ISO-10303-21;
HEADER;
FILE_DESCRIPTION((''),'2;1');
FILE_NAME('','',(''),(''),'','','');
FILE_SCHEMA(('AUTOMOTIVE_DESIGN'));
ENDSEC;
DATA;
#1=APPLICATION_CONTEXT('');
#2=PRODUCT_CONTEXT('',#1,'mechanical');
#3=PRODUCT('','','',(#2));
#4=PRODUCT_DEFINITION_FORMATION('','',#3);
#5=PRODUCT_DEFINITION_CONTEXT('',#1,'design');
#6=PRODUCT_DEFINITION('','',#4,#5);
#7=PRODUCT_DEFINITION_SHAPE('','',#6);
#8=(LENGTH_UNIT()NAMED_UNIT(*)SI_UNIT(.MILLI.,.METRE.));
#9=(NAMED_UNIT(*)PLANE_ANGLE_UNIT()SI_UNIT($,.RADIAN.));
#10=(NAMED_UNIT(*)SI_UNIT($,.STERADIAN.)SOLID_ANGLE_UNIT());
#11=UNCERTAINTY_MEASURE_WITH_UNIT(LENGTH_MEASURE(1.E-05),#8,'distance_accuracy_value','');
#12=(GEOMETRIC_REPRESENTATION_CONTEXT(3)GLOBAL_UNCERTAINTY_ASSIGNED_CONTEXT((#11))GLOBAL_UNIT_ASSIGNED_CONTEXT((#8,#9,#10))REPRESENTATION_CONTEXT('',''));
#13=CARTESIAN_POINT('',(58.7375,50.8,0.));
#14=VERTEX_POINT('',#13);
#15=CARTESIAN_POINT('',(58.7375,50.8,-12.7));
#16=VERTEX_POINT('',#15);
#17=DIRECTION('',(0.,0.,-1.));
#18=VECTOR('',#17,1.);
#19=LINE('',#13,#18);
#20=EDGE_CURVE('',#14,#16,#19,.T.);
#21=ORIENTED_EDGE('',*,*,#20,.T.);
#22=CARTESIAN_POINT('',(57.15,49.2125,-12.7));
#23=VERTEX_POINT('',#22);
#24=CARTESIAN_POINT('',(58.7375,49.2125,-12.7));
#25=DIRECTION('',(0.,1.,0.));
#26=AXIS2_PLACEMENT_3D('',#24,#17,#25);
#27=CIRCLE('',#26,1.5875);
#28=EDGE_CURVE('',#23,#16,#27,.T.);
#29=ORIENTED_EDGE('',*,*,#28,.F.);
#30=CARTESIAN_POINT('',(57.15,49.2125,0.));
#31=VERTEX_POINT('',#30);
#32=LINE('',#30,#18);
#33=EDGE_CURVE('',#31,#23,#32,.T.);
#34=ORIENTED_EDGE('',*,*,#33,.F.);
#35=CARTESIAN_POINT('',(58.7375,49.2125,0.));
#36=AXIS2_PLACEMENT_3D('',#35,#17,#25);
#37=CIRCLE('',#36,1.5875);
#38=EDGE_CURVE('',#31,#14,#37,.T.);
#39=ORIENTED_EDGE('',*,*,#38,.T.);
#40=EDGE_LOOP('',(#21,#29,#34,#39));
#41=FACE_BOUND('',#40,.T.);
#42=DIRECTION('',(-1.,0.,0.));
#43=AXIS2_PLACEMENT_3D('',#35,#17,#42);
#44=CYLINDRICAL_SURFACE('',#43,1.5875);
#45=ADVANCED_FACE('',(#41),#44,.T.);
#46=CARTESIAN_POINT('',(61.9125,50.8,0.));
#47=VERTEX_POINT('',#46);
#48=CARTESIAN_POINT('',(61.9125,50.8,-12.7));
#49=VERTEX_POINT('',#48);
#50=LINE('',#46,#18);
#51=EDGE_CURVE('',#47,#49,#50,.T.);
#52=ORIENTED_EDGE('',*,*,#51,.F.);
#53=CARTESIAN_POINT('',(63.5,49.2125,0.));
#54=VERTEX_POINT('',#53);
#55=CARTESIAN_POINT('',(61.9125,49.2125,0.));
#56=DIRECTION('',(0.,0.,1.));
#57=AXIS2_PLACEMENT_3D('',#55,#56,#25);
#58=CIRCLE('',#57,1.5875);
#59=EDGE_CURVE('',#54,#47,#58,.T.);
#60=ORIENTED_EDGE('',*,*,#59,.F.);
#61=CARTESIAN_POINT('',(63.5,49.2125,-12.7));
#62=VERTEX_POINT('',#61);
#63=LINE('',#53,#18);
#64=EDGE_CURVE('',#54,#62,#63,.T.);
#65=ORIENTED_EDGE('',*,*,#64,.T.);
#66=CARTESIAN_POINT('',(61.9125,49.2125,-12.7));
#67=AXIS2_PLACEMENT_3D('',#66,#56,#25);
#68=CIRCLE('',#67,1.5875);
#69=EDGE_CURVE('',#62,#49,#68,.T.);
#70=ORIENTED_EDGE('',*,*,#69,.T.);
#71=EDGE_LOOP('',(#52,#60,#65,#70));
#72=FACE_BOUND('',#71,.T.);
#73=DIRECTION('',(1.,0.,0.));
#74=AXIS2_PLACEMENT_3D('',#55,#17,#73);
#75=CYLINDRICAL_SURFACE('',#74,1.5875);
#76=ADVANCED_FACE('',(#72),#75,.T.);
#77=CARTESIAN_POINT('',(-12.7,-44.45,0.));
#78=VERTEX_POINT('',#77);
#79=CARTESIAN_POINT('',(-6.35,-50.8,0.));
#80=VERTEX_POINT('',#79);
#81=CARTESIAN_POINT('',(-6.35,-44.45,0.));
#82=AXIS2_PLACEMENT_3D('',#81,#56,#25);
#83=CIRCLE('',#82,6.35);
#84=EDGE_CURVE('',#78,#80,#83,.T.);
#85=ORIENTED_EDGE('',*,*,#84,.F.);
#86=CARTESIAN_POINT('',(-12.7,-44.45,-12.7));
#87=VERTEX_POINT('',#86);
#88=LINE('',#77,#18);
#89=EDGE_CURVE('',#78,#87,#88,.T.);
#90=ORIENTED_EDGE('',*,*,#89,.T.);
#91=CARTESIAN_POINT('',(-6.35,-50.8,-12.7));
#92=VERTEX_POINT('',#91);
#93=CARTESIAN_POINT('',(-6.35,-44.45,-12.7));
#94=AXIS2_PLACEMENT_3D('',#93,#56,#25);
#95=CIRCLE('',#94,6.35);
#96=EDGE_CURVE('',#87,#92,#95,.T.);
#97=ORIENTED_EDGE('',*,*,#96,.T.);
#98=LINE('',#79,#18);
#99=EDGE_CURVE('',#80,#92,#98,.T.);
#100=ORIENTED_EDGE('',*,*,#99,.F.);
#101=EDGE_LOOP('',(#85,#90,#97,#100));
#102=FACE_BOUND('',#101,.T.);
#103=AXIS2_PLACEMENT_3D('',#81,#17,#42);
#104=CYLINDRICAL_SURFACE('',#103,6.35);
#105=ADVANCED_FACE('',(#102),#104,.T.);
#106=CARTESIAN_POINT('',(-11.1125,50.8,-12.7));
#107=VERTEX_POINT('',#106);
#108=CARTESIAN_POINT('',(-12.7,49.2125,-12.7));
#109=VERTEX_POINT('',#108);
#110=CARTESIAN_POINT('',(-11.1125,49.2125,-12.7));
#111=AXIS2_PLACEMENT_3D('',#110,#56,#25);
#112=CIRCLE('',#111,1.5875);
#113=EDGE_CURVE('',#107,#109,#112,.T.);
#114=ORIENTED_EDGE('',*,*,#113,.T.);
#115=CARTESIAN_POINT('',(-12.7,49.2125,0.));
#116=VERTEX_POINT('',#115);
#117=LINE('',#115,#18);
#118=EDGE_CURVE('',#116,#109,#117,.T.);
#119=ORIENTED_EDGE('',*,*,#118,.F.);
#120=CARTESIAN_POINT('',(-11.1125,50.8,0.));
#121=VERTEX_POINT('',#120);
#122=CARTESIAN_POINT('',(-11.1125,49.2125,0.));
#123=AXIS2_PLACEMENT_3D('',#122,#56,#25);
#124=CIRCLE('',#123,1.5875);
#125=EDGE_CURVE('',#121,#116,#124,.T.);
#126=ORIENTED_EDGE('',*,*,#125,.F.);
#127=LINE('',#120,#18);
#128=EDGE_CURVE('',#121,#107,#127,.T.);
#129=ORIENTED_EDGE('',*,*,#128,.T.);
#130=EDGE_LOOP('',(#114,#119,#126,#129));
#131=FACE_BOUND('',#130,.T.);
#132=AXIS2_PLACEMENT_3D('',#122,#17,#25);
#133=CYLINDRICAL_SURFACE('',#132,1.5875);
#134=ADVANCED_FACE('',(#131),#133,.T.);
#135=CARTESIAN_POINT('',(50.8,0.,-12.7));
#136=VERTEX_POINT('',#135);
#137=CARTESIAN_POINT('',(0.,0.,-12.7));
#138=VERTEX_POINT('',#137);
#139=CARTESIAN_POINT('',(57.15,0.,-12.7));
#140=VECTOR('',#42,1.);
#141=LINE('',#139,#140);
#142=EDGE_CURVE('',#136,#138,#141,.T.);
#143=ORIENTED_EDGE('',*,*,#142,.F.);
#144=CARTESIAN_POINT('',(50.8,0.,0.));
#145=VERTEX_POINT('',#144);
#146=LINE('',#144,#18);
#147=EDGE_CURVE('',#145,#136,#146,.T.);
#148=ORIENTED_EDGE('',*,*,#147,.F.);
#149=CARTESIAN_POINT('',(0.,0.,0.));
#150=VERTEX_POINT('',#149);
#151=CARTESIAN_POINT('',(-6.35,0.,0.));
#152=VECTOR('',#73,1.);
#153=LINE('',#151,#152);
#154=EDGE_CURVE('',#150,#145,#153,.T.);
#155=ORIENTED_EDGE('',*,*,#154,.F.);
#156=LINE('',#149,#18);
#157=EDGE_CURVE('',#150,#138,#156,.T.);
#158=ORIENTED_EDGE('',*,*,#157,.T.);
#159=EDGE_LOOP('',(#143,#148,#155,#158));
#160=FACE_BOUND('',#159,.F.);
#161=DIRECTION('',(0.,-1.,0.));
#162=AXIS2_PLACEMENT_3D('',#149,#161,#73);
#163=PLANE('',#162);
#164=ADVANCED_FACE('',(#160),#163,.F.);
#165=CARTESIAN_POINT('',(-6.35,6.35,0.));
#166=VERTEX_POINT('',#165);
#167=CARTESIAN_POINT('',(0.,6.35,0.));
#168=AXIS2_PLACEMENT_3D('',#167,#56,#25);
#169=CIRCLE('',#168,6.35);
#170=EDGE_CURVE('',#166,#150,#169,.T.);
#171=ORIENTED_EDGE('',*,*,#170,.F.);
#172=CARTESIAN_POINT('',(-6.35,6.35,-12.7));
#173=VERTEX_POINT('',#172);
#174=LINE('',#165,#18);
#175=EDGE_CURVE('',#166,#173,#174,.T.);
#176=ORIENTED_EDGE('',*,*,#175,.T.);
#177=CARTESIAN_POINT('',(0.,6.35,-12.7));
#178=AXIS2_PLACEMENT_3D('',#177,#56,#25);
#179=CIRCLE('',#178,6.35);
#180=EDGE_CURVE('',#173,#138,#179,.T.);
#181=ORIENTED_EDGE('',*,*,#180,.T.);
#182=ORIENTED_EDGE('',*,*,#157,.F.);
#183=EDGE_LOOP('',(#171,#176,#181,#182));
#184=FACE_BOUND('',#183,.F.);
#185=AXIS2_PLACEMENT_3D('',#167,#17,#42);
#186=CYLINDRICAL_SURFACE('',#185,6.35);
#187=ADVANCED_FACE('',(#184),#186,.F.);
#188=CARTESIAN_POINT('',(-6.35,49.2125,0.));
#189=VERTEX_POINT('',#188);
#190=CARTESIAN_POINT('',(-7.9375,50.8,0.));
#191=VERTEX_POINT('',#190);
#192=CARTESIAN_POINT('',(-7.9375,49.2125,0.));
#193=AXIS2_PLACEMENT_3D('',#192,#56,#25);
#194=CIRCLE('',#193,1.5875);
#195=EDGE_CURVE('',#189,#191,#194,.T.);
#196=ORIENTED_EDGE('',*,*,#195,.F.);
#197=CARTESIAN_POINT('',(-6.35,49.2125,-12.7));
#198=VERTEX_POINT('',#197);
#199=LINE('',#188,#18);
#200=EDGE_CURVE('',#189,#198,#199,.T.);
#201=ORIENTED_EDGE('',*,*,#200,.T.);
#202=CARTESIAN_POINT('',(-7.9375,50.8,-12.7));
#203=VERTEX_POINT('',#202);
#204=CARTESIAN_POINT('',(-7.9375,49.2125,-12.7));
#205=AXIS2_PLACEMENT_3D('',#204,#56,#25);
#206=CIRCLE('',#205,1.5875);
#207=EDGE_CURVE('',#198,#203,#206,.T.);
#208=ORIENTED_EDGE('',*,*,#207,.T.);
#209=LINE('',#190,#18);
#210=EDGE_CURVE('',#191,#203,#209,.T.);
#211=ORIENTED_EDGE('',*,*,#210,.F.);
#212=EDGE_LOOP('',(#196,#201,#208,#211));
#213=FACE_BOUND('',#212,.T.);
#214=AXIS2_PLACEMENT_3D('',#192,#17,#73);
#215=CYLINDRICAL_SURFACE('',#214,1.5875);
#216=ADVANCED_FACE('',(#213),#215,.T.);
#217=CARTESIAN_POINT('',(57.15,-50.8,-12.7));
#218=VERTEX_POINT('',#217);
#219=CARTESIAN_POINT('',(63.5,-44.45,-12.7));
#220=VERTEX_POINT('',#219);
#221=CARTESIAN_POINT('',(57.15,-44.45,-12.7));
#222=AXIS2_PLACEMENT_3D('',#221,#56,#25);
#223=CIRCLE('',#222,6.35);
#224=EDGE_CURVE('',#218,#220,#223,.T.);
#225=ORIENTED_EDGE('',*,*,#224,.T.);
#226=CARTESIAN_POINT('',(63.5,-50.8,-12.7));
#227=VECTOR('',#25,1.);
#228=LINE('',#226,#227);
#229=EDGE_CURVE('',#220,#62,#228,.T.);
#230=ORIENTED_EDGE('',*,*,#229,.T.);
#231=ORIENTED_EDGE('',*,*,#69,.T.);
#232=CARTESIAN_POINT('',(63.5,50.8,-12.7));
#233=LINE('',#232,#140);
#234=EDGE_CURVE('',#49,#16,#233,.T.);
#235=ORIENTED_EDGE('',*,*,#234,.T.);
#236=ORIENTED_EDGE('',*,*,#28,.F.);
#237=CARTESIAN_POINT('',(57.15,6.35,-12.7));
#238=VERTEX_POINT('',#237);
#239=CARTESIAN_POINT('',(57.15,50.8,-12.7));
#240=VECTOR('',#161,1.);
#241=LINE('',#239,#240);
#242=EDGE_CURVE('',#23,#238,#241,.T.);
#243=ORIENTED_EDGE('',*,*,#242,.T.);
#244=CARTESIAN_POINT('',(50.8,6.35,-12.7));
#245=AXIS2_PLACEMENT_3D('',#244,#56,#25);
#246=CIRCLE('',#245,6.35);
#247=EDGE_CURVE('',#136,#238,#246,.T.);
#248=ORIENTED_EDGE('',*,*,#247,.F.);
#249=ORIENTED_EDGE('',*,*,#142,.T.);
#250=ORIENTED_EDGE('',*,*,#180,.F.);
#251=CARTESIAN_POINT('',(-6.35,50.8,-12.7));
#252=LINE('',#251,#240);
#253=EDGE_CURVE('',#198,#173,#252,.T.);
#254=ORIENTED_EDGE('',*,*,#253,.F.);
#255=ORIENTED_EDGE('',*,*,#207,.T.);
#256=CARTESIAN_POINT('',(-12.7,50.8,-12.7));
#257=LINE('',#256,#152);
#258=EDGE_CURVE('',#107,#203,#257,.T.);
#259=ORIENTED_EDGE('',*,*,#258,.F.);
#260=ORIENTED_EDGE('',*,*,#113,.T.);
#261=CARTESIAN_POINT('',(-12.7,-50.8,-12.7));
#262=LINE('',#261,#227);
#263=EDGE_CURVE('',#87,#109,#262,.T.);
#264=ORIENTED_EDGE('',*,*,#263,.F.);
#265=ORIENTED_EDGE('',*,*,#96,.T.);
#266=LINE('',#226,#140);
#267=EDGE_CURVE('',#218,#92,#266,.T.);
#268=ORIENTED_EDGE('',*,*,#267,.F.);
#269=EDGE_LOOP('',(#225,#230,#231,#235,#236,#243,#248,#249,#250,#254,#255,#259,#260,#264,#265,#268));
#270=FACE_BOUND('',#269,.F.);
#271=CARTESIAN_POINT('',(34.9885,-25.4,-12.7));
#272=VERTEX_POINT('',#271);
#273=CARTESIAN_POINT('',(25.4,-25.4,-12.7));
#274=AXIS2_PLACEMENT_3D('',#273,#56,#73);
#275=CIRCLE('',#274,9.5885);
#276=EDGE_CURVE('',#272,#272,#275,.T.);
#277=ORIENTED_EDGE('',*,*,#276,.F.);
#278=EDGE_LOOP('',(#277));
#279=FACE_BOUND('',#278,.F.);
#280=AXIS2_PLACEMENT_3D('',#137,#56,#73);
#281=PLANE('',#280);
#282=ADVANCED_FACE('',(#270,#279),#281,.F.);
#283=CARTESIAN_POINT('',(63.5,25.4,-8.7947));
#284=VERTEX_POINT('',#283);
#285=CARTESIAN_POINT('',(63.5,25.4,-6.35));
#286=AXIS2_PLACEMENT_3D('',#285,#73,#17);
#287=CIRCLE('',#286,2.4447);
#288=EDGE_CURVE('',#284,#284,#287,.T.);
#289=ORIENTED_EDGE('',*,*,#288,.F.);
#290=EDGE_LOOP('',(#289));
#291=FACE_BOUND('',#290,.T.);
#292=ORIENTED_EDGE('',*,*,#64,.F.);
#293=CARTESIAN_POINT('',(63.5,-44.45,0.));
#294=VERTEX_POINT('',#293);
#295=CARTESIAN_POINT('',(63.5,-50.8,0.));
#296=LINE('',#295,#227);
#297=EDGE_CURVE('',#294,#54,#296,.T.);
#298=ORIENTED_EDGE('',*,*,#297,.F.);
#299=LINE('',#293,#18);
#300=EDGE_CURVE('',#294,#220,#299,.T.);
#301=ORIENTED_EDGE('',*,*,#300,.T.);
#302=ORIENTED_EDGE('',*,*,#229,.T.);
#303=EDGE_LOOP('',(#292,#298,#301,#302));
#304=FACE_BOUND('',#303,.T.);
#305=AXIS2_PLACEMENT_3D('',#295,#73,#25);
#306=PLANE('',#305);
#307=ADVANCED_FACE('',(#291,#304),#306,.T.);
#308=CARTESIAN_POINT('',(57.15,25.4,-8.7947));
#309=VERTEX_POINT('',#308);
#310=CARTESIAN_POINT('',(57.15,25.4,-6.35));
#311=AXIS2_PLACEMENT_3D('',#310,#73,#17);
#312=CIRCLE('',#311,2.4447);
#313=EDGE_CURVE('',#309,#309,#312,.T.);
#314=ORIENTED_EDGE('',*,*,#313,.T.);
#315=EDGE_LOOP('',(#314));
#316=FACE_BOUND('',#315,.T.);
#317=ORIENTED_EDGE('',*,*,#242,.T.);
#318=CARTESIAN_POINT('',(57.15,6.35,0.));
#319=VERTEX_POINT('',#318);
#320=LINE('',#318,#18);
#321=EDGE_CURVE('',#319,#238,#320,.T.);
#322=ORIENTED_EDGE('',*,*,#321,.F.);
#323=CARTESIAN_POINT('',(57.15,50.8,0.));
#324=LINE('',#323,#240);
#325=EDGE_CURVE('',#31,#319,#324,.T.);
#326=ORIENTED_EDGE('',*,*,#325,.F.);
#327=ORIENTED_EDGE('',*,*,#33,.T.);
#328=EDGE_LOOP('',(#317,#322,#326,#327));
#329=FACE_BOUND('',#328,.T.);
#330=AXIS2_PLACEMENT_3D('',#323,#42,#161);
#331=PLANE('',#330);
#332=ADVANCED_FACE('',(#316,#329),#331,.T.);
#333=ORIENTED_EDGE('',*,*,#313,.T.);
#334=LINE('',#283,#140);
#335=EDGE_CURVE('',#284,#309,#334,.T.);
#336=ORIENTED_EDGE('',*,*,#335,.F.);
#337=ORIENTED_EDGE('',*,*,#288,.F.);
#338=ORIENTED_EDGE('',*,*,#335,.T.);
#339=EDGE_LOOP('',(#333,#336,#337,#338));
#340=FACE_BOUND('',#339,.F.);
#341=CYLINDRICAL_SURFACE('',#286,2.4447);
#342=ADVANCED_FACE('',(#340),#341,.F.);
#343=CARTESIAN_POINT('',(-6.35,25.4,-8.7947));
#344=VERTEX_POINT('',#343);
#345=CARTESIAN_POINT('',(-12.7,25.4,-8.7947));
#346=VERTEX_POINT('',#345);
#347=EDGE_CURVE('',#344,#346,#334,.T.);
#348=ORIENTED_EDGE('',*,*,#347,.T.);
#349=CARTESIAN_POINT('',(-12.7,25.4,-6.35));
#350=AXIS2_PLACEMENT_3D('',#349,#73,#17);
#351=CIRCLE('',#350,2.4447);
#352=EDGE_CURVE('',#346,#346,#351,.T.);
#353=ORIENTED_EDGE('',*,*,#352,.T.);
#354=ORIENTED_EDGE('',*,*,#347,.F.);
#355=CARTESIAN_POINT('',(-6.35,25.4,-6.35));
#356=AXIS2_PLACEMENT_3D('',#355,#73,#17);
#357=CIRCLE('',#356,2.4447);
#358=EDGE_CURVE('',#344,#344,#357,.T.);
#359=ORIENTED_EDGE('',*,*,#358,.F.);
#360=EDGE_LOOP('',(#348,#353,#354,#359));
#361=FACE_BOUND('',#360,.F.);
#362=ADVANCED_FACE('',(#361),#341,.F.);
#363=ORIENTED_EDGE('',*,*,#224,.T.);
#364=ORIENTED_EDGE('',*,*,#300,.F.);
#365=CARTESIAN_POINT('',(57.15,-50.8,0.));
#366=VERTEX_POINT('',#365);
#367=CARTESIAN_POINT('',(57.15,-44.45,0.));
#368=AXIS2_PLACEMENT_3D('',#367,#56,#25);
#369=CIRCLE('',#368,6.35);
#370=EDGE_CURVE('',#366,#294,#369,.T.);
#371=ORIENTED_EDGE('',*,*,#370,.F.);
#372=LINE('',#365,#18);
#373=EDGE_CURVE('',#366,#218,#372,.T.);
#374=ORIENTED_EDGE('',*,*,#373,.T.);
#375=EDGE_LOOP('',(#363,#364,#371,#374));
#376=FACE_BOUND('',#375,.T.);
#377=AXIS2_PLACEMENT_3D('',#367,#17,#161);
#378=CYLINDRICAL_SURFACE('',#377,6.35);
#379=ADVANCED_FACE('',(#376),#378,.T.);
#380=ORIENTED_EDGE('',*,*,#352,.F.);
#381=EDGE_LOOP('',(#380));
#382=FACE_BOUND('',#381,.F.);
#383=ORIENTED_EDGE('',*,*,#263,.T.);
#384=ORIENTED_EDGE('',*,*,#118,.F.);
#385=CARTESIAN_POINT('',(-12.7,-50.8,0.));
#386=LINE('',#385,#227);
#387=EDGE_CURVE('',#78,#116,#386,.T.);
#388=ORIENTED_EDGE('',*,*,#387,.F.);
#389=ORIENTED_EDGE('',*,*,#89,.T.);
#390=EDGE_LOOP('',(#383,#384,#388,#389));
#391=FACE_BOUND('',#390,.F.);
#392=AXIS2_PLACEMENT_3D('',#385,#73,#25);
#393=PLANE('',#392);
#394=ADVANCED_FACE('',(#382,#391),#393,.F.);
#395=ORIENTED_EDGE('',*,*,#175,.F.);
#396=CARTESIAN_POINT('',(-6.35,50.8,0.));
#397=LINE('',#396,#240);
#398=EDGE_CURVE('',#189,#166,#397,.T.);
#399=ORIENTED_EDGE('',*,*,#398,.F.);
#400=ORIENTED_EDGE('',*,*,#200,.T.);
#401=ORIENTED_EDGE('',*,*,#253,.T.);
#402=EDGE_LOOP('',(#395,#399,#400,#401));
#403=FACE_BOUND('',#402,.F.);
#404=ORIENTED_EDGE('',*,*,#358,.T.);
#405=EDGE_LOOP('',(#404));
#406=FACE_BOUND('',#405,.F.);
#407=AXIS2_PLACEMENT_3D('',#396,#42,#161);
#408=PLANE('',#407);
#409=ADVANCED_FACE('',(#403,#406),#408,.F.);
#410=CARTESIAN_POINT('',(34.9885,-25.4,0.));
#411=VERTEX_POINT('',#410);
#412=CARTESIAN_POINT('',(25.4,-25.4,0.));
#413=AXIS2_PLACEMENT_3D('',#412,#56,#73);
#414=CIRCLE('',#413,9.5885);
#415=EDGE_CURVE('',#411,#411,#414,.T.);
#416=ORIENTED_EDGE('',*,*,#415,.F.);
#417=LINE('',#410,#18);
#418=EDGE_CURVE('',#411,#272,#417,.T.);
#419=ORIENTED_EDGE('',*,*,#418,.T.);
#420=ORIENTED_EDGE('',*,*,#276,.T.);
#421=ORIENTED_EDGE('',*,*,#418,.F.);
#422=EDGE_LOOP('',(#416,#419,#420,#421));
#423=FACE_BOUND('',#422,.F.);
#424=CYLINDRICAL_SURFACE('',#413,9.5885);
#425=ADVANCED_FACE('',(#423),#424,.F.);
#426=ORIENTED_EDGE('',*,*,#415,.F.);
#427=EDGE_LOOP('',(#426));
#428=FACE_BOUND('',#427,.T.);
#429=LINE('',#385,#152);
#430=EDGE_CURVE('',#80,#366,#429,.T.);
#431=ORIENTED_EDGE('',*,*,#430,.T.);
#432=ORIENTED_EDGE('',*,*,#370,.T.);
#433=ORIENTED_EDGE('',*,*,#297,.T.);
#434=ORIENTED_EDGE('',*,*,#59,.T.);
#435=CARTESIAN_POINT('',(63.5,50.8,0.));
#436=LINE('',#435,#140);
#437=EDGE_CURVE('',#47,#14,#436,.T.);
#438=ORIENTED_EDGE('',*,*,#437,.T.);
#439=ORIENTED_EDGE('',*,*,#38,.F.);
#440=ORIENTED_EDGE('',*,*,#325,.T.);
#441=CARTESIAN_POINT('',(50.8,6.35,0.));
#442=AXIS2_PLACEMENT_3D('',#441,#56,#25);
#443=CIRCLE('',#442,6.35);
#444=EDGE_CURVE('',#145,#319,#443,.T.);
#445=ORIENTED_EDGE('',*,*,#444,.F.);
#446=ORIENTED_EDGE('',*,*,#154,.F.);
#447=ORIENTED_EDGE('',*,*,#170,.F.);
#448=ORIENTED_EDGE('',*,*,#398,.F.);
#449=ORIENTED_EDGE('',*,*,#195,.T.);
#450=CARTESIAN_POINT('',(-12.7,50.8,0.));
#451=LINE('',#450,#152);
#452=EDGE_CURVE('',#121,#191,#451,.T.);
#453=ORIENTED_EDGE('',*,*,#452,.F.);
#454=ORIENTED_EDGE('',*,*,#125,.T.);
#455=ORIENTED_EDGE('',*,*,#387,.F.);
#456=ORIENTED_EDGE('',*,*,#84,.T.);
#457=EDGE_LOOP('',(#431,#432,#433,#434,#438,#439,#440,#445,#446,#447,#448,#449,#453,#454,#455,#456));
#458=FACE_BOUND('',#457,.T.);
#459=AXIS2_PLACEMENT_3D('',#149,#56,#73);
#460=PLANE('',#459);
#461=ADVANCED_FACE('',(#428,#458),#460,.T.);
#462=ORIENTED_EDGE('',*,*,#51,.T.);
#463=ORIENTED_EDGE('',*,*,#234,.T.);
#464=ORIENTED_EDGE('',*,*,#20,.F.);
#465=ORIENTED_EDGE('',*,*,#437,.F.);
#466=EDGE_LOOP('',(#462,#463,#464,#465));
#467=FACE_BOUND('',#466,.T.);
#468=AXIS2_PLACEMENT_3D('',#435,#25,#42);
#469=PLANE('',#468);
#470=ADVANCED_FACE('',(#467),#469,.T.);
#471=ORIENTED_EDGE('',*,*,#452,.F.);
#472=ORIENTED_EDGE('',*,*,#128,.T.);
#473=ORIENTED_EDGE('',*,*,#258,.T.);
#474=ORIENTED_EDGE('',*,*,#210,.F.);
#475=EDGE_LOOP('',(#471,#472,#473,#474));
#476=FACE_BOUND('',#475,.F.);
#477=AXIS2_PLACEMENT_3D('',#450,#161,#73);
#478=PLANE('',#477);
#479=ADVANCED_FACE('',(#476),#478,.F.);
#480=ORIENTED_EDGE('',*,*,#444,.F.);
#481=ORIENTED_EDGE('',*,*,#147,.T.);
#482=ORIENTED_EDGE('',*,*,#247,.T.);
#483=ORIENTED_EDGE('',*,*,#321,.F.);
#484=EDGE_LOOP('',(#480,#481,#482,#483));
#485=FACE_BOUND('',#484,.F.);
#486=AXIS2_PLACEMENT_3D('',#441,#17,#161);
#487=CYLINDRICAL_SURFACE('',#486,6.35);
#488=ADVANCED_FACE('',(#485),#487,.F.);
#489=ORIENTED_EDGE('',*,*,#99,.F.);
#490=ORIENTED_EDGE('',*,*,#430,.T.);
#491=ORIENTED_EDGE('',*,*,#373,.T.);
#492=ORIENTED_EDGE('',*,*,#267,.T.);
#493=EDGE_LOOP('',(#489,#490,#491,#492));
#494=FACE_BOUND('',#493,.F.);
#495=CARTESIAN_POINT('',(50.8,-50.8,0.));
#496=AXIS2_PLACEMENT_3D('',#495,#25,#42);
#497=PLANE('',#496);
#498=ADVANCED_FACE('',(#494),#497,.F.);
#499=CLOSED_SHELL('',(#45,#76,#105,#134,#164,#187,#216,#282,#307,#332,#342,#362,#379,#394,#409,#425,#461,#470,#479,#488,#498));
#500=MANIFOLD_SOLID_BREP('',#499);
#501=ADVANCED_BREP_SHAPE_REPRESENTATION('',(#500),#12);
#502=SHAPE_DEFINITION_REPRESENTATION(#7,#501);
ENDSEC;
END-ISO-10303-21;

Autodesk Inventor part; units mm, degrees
ref_plane "YZ Plane" through (0, 0, 0) normal (1, 0, 0) x (0, 1, 0)
ref_plane "XZ Plane" through (0, 0, 0) normal (0, 1, 0) x (-1, 0, 0)
ref_plane "XY Plane" through (0, 0, 0) normal (0, 0, 1) x (1, 0, 0)
sketch "Sketch1" plane through (0, 0, 0) normal (0, 0, 1) x (1, 0, 0)
  line L0 (0, 0) -> (50.8, 0)
  line L1 (50.8, 0) -> (50.8, -50.8)
  line L2 (50.8, -50.8) -> (0, -50.8)
  line L3 (0, -50.8) -> (0, 0)
  circle A0 centre (25.4, -25.4) radius 9.5885
  line L4 (0, -50.8) -> (-12.7, -50.8)
  line L5 (-12.7, -50.8) -> (-12.7, 50.8)
  line L6 (-12.7, 50.8) -> (-6.35, 50.8)
  line L7 (0, 0) -> (0, -50.8)
  line L8 (50.8, -50.8) -> (63.5, -50.8)
  line L9 (63.5, -50.8) -> (63.5, 50.8)
  line L10 (63.5, 50.8) -> (57.15, 50.8)
  line L11 (50.8, 0) -> (50.8, -50.8)
  line L12 (-6.35, 50.8) -> (-6.35, 0)
  line L13 (-6.35, 0) -> (0, 0)
  line L14 (57.15, 50.8) -> (57.15, 0)
  line L15 (57.15, 0) -> (50.8, 0)
  dimension "d0" = 19.177
  dimension "d1" = 50.8
  dimension "d2" = 50.8
  dimension "d37" = 25.4
  dimension "d44" = 101.6
  dimension "d45" = 101.6
extrude "Extrusion1" add sketch "Sketch1" against normal blind 12.7
sketch "Sketch9" plane through (63.5, -50.8, 0) normal (1, 0, 0) x (0, 0, -1)
  line L0 (0, 101.6) -> (0, 0) projected
  line L1 (0, 101.6) -> (12.7, 101.6) projected
  circle A0 centre (6.35, 76.2) radius 2.4447
  point P0 (0, 50.8)
  dimension "d48" = 4.8895
  dimension "d49" = 6.35
  dimension "d50" = 25.4
extrude "Extrusion9" cut sketch "Sketch9" against normal through all
fillet "Fillet13" radius 1.5875 4 edges at (-12.7, 50.8, -6.35) (-6.35, 50.8, -6.35) (57.15, 50.8, -6.35) (63.5, 50.8, -6.35)
fillet "Fillet14" radius 6.35 4 edges at (63.5, -50.8, -6.35) (-12.7, -50.8, -6.35) (-6.35, 0, -6.35) (57.15, 0, -6.35)
properties part number "Needle Bearing Mount" material "ABS Plastic"
